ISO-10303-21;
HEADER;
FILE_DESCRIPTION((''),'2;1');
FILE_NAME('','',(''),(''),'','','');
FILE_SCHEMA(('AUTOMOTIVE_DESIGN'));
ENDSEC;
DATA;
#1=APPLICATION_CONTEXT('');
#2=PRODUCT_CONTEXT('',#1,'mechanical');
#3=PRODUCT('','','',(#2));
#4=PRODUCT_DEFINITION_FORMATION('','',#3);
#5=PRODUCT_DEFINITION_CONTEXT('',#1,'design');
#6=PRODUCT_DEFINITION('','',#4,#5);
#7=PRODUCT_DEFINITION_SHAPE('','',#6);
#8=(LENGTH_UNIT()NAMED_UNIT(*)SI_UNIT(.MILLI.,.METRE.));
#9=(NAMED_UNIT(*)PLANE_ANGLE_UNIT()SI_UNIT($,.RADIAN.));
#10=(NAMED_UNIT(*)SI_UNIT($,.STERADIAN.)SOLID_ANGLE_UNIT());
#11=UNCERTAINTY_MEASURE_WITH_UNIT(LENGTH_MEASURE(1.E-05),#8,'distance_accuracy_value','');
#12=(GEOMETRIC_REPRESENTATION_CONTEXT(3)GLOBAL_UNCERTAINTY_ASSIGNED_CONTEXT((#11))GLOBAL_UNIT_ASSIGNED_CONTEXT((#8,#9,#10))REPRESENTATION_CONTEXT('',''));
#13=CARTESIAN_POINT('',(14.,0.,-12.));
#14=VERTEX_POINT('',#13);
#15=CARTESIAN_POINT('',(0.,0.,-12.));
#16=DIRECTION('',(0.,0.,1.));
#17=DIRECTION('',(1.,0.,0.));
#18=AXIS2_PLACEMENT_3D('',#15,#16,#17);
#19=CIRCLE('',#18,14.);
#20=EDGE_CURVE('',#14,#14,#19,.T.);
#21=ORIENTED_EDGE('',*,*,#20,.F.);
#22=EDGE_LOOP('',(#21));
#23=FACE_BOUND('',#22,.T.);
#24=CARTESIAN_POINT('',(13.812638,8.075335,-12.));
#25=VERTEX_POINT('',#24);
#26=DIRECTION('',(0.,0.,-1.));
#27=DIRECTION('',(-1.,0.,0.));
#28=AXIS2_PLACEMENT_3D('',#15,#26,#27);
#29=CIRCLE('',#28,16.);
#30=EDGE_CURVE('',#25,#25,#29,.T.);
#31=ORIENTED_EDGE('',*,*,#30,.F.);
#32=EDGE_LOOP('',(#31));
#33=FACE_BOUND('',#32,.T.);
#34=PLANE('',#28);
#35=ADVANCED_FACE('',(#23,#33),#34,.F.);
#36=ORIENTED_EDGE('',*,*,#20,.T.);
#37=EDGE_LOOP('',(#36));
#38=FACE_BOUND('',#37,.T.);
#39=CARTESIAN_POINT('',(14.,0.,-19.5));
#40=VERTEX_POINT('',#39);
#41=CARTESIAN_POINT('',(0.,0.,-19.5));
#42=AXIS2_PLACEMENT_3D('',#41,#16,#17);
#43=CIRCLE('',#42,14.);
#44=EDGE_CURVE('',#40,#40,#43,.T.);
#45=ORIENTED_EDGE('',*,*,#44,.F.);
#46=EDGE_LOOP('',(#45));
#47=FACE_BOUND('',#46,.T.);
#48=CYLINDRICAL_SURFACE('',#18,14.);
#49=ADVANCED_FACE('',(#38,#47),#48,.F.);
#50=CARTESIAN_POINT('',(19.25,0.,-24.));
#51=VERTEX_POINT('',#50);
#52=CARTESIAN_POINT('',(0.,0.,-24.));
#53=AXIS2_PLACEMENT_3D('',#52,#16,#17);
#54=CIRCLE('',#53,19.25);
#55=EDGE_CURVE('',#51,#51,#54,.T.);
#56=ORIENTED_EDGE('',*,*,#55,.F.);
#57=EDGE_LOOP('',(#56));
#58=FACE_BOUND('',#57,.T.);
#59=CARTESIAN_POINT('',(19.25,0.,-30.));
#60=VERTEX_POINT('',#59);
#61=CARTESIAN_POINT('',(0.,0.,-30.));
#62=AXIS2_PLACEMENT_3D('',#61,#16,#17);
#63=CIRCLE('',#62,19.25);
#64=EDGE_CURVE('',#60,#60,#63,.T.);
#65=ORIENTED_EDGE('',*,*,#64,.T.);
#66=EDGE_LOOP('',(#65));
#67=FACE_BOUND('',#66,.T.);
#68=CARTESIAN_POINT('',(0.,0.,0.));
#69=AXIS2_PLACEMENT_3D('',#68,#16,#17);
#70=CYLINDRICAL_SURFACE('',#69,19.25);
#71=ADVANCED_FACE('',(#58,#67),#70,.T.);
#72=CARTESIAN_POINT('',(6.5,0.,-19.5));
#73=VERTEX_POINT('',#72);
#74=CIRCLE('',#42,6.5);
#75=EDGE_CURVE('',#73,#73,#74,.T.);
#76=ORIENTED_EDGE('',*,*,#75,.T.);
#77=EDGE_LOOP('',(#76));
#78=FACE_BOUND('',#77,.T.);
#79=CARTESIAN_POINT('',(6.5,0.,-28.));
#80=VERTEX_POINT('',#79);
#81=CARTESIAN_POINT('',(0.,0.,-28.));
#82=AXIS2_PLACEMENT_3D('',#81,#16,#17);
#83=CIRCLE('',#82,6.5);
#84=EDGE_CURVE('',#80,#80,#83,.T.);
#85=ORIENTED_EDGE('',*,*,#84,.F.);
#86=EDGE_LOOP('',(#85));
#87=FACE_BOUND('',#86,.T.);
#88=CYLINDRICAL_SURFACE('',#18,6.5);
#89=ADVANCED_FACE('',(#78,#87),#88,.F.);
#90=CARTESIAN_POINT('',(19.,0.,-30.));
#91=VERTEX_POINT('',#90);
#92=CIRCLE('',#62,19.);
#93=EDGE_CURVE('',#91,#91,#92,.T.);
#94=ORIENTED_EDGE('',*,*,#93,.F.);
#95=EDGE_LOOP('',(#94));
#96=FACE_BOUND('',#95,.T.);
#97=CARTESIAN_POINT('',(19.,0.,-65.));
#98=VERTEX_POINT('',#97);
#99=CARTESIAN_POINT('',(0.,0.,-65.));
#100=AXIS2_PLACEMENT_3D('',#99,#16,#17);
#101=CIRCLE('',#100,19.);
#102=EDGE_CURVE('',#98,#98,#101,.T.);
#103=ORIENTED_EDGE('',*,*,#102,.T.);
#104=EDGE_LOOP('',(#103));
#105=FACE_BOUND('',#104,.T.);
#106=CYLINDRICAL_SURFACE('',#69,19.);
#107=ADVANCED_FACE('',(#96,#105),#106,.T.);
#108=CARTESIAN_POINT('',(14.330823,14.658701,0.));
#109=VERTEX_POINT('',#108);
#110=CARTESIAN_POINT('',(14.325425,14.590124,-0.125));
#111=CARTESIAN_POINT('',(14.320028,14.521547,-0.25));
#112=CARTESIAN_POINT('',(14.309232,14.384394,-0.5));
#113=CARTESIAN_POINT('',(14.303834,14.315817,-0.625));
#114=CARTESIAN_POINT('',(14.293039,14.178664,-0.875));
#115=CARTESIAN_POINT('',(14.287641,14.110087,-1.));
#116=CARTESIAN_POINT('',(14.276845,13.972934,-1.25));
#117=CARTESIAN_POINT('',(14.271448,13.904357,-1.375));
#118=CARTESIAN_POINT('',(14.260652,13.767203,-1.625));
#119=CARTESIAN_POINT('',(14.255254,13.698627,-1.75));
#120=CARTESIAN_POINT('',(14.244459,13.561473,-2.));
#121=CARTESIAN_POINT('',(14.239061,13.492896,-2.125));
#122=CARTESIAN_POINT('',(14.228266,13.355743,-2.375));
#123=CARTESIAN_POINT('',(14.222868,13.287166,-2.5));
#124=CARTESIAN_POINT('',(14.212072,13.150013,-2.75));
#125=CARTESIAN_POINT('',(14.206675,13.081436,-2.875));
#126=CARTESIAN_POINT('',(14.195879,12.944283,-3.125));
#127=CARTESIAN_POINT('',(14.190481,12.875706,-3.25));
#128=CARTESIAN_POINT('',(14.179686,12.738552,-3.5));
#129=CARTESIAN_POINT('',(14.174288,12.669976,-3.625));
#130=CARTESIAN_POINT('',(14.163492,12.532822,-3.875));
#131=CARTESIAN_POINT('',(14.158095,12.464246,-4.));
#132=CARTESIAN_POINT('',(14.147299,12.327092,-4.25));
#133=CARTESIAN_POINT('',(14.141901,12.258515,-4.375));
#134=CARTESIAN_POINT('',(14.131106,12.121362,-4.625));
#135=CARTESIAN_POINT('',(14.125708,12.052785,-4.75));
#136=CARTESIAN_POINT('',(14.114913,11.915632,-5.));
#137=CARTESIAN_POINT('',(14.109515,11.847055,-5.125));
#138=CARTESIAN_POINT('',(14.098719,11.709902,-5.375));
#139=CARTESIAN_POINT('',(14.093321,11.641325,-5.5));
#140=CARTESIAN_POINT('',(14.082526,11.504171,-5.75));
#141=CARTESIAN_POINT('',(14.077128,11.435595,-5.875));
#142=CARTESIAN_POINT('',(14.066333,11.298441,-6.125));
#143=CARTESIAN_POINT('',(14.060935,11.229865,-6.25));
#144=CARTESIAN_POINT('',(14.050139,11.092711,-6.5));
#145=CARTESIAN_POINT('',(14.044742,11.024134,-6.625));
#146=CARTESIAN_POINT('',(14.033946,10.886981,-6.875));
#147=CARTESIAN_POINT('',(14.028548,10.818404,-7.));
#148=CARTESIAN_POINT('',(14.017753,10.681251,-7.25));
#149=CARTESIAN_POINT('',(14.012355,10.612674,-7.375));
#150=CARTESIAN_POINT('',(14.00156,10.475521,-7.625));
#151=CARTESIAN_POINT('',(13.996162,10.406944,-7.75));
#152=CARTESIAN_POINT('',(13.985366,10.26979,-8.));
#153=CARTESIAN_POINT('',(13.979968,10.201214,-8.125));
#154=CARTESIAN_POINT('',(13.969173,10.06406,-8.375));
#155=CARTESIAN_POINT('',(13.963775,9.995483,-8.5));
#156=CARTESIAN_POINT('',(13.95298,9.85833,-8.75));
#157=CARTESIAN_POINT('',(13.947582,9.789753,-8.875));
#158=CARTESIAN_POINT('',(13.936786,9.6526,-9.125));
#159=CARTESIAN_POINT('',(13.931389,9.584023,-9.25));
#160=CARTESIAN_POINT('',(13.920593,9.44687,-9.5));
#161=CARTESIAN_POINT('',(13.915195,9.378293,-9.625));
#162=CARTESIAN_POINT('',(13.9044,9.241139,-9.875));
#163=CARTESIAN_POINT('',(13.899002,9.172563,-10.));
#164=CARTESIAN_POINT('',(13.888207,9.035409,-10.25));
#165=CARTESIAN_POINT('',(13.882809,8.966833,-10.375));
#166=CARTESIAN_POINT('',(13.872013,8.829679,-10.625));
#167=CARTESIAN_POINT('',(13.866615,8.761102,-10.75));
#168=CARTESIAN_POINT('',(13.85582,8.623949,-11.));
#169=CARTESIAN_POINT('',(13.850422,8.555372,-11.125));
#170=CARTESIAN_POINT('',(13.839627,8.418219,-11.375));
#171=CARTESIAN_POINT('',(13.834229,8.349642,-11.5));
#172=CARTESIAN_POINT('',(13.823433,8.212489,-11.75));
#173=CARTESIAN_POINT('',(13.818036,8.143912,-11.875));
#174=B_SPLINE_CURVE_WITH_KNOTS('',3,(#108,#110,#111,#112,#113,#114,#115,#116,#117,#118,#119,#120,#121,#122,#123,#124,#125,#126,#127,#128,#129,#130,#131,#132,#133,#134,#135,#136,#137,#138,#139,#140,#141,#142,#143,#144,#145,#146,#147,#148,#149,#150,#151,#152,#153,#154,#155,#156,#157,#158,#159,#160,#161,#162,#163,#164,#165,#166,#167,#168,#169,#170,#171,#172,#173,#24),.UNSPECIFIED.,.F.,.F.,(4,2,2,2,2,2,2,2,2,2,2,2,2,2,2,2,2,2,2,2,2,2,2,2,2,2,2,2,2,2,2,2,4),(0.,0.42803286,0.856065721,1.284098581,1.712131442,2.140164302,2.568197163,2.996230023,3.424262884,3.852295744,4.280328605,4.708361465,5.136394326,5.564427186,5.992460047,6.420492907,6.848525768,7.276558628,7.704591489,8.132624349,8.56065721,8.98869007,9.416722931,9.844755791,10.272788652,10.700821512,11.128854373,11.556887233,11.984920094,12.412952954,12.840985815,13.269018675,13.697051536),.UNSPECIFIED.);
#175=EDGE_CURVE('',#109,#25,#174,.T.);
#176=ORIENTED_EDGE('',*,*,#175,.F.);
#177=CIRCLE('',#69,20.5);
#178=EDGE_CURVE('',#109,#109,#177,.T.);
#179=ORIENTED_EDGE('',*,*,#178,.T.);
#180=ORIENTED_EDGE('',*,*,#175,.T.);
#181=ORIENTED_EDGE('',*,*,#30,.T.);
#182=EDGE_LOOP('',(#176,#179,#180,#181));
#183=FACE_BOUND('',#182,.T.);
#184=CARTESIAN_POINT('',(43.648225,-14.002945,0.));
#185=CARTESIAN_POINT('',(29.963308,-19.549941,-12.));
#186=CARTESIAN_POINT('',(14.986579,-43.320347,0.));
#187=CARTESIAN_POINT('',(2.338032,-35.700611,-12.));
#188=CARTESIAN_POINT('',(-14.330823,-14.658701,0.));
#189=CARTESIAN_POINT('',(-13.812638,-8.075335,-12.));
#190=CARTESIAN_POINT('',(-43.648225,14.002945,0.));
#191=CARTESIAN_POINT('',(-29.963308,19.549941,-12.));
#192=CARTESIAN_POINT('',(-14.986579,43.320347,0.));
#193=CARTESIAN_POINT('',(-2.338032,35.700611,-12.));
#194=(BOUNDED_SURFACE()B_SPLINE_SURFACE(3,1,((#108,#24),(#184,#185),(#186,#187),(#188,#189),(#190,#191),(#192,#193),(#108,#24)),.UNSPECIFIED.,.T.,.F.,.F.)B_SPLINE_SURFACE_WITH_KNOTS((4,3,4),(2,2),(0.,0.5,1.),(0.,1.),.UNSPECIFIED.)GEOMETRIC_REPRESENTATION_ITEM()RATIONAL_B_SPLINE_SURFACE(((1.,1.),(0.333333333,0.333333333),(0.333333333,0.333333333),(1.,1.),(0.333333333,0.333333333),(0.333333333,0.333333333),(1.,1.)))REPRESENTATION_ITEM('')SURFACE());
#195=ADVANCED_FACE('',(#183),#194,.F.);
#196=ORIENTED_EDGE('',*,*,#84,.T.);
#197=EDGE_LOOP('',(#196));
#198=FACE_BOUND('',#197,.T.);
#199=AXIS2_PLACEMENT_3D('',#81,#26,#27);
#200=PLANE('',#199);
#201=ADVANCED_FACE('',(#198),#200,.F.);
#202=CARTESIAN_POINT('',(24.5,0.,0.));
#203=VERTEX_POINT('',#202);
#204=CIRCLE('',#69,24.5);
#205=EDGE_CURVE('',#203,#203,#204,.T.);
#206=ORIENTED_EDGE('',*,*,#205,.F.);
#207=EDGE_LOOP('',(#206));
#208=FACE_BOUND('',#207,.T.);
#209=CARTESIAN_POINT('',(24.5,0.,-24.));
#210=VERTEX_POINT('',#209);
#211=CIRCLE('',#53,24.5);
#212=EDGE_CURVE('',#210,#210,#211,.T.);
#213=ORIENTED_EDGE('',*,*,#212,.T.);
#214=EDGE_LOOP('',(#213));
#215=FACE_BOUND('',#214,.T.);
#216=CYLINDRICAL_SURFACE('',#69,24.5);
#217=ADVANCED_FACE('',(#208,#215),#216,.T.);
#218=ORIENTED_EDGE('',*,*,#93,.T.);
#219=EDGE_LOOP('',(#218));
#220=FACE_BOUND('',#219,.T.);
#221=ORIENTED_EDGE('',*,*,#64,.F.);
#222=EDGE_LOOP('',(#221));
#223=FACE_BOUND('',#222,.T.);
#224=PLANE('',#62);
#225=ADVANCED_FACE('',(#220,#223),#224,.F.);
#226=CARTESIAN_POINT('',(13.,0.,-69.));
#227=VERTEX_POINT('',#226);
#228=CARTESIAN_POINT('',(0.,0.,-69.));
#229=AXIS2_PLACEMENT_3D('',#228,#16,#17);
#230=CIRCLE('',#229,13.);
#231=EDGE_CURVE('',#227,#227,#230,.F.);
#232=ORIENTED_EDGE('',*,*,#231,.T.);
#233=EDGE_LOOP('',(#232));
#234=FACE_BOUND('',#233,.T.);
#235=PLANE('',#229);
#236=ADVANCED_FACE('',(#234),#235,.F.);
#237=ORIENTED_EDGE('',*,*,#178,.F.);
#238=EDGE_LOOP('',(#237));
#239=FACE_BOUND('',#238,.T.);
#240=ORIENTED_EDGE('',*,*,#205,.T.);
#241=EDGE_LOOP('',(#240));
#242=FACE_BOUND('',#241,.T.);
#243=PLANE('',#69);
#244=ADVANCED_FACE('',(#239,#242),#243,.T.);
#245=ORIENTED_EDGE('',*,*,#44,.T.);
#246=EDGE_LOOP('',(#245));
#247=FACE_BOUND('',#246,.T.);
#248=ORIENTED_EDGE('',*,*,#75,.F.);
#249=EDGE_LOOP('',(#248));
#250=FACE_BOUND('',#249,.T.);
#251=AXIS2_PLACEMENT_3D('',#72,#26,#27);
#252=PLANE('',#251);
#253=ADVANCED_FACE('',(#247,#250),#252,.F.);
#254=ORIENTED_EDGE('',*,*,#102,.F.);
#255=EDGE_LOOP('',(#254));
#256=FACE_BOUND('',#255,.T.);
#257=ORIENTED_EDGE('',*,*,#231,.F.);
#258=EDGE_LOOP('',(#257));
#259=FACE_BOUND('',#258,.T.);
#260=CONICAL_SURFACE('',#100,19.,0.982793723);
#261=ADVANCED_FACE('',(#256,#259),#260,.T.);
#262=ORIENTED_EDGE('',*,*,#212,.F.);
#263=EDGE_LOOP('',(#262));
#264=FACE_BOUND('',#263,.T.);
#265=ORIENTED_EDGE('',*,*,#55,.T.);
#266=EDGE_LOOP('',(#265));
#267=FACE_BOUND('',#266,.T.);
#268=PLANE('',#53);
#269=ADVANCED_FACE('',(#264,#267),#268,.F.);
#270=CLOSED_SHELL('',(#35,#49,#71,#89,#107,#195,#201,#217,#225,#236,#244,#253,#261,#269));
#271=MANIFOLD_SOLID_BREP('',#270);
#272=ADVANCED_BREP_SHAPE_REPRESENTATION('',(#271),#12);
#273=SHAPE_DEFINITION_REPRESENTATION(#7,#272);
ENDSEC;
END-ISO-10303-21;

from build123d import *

# Parameters (mm, degrees)
SKETCH1_W         = 24
SKETCH1_H         = 24.5
SKETCH1_W_2       = 39
SKETCH1_H_2       = 19
CHAMFER9_SIZE     = 6
CHAMFER9_SIZE2    = 4
HOLE1_D           = 13
HOLE1_DEPTH       = 16
HOLE1_CBORE_D     = 28
HOLE1_CBORE_DEPTH = 7.5


with BuildPart() as part:
    # Sketch1 → Revolve2 (revolve)
    with BuildSketch(Plane(origin=(0, 0, 0), x_dir=(0, 0, -1), z_dir=(1, 0, 0)), mode=Mode.PRIVATE) as revolve2_sk:
        with Locations((12, 12.25)):
            Rectangle(SKETCH1_W, SKETCH1_H)
        Polygon((24, 19.25), (24, 0), (30, 0), (30, 19), (30, 19.25), align=None)
        with Locations((49.5, 9.5)):
            Rectangle(SKETCH1_W_2, SKETCH1_H_2)
    revolve(revolve2_sk.sketch.rotate(Axis((0, 0, 0), (0, 0, -1)), 90), axis=Axis((0, 0, 0), (0, 0, -1)))

    # Chamfer9
    chamfer9_edges = [part.edges().sort_by_distance(p)[0] for p in [
        (-19, 0, -69),
    ]]
    chamfer9_side = [part.faces().sort_by_distance(p)[0] for p in [
        (0, 0, -69),
    ]]
    chamfer(chamfer9_edges, length=CHAMFER9_SIZE, length2=CHAMFER9_SIZE2, reference=chamfer9_side[0])

    # Cut-Loft1: read off the stored shape, not the designer's step
    # Cut-Loft1: loft between two sections, ruled curve by curve
    cut_loft1_from = [
        Edge.make_bspline([(14.330823066, 14.658700837, 0), (43.648224741, -14.002945296, 0), (14.986578608, -43.32034697, 0), (-14.330823066, -14.658700837, 0), (-43.648224741, 14.002945296, 0), (-14.986578608, 43.32034697, 0), (14.330823066, 14.658700837, 0)], [0, 0, 0, 0, 0.5, 0.5, 0.5, 1, 1, 1, 1], 3, [1, 0.333333333, 0.333333333, 1, 0.333333333, 0.333333333, 1]),
    ]
    cut_loft1_to = [
        Edge.make_bspline([(13.812637818, 8.07533507, -12), (29.963307959, -19.549940567, -12), (2.338032322, -35.700610707, -12), (-13.812637818, -8.07533507, -12), (-29.963307959, 19.549940567, -12), (-2.338032322, 35.700610707, -12), (13.812637818, 8.07533507, -12)], [0, 0, 0, 0, 0.5, 0.5, 0.5, 1, 1, 1, 1], 3, [1, 0.333333333, 0.333333333, 1, 0.333333333, 0.333333333, 1]),
    ]
    cut_loft1 = Solid(Shell([*[Face.make_surface_from_curves(cut_loft1_from[k], cut_loft1_to[k]) for k in range(1)], Face(Wire(cut_loft1_from)), Face(Wire(cut_loft1_to))]))
    add(cut_loft1, mode=Mode.SUBTRACT)

    # Hole1
    with Locations(Plane.XY.offset(-12)):
        with Locations((0, 0)):
            CounterBoreHole(HOLE1_D / 2, HOLE1_CBORE_D / 2, HOLE1_CBORE_DEPTH, depth=HOLE1_DEPTH)


solid = part.part
